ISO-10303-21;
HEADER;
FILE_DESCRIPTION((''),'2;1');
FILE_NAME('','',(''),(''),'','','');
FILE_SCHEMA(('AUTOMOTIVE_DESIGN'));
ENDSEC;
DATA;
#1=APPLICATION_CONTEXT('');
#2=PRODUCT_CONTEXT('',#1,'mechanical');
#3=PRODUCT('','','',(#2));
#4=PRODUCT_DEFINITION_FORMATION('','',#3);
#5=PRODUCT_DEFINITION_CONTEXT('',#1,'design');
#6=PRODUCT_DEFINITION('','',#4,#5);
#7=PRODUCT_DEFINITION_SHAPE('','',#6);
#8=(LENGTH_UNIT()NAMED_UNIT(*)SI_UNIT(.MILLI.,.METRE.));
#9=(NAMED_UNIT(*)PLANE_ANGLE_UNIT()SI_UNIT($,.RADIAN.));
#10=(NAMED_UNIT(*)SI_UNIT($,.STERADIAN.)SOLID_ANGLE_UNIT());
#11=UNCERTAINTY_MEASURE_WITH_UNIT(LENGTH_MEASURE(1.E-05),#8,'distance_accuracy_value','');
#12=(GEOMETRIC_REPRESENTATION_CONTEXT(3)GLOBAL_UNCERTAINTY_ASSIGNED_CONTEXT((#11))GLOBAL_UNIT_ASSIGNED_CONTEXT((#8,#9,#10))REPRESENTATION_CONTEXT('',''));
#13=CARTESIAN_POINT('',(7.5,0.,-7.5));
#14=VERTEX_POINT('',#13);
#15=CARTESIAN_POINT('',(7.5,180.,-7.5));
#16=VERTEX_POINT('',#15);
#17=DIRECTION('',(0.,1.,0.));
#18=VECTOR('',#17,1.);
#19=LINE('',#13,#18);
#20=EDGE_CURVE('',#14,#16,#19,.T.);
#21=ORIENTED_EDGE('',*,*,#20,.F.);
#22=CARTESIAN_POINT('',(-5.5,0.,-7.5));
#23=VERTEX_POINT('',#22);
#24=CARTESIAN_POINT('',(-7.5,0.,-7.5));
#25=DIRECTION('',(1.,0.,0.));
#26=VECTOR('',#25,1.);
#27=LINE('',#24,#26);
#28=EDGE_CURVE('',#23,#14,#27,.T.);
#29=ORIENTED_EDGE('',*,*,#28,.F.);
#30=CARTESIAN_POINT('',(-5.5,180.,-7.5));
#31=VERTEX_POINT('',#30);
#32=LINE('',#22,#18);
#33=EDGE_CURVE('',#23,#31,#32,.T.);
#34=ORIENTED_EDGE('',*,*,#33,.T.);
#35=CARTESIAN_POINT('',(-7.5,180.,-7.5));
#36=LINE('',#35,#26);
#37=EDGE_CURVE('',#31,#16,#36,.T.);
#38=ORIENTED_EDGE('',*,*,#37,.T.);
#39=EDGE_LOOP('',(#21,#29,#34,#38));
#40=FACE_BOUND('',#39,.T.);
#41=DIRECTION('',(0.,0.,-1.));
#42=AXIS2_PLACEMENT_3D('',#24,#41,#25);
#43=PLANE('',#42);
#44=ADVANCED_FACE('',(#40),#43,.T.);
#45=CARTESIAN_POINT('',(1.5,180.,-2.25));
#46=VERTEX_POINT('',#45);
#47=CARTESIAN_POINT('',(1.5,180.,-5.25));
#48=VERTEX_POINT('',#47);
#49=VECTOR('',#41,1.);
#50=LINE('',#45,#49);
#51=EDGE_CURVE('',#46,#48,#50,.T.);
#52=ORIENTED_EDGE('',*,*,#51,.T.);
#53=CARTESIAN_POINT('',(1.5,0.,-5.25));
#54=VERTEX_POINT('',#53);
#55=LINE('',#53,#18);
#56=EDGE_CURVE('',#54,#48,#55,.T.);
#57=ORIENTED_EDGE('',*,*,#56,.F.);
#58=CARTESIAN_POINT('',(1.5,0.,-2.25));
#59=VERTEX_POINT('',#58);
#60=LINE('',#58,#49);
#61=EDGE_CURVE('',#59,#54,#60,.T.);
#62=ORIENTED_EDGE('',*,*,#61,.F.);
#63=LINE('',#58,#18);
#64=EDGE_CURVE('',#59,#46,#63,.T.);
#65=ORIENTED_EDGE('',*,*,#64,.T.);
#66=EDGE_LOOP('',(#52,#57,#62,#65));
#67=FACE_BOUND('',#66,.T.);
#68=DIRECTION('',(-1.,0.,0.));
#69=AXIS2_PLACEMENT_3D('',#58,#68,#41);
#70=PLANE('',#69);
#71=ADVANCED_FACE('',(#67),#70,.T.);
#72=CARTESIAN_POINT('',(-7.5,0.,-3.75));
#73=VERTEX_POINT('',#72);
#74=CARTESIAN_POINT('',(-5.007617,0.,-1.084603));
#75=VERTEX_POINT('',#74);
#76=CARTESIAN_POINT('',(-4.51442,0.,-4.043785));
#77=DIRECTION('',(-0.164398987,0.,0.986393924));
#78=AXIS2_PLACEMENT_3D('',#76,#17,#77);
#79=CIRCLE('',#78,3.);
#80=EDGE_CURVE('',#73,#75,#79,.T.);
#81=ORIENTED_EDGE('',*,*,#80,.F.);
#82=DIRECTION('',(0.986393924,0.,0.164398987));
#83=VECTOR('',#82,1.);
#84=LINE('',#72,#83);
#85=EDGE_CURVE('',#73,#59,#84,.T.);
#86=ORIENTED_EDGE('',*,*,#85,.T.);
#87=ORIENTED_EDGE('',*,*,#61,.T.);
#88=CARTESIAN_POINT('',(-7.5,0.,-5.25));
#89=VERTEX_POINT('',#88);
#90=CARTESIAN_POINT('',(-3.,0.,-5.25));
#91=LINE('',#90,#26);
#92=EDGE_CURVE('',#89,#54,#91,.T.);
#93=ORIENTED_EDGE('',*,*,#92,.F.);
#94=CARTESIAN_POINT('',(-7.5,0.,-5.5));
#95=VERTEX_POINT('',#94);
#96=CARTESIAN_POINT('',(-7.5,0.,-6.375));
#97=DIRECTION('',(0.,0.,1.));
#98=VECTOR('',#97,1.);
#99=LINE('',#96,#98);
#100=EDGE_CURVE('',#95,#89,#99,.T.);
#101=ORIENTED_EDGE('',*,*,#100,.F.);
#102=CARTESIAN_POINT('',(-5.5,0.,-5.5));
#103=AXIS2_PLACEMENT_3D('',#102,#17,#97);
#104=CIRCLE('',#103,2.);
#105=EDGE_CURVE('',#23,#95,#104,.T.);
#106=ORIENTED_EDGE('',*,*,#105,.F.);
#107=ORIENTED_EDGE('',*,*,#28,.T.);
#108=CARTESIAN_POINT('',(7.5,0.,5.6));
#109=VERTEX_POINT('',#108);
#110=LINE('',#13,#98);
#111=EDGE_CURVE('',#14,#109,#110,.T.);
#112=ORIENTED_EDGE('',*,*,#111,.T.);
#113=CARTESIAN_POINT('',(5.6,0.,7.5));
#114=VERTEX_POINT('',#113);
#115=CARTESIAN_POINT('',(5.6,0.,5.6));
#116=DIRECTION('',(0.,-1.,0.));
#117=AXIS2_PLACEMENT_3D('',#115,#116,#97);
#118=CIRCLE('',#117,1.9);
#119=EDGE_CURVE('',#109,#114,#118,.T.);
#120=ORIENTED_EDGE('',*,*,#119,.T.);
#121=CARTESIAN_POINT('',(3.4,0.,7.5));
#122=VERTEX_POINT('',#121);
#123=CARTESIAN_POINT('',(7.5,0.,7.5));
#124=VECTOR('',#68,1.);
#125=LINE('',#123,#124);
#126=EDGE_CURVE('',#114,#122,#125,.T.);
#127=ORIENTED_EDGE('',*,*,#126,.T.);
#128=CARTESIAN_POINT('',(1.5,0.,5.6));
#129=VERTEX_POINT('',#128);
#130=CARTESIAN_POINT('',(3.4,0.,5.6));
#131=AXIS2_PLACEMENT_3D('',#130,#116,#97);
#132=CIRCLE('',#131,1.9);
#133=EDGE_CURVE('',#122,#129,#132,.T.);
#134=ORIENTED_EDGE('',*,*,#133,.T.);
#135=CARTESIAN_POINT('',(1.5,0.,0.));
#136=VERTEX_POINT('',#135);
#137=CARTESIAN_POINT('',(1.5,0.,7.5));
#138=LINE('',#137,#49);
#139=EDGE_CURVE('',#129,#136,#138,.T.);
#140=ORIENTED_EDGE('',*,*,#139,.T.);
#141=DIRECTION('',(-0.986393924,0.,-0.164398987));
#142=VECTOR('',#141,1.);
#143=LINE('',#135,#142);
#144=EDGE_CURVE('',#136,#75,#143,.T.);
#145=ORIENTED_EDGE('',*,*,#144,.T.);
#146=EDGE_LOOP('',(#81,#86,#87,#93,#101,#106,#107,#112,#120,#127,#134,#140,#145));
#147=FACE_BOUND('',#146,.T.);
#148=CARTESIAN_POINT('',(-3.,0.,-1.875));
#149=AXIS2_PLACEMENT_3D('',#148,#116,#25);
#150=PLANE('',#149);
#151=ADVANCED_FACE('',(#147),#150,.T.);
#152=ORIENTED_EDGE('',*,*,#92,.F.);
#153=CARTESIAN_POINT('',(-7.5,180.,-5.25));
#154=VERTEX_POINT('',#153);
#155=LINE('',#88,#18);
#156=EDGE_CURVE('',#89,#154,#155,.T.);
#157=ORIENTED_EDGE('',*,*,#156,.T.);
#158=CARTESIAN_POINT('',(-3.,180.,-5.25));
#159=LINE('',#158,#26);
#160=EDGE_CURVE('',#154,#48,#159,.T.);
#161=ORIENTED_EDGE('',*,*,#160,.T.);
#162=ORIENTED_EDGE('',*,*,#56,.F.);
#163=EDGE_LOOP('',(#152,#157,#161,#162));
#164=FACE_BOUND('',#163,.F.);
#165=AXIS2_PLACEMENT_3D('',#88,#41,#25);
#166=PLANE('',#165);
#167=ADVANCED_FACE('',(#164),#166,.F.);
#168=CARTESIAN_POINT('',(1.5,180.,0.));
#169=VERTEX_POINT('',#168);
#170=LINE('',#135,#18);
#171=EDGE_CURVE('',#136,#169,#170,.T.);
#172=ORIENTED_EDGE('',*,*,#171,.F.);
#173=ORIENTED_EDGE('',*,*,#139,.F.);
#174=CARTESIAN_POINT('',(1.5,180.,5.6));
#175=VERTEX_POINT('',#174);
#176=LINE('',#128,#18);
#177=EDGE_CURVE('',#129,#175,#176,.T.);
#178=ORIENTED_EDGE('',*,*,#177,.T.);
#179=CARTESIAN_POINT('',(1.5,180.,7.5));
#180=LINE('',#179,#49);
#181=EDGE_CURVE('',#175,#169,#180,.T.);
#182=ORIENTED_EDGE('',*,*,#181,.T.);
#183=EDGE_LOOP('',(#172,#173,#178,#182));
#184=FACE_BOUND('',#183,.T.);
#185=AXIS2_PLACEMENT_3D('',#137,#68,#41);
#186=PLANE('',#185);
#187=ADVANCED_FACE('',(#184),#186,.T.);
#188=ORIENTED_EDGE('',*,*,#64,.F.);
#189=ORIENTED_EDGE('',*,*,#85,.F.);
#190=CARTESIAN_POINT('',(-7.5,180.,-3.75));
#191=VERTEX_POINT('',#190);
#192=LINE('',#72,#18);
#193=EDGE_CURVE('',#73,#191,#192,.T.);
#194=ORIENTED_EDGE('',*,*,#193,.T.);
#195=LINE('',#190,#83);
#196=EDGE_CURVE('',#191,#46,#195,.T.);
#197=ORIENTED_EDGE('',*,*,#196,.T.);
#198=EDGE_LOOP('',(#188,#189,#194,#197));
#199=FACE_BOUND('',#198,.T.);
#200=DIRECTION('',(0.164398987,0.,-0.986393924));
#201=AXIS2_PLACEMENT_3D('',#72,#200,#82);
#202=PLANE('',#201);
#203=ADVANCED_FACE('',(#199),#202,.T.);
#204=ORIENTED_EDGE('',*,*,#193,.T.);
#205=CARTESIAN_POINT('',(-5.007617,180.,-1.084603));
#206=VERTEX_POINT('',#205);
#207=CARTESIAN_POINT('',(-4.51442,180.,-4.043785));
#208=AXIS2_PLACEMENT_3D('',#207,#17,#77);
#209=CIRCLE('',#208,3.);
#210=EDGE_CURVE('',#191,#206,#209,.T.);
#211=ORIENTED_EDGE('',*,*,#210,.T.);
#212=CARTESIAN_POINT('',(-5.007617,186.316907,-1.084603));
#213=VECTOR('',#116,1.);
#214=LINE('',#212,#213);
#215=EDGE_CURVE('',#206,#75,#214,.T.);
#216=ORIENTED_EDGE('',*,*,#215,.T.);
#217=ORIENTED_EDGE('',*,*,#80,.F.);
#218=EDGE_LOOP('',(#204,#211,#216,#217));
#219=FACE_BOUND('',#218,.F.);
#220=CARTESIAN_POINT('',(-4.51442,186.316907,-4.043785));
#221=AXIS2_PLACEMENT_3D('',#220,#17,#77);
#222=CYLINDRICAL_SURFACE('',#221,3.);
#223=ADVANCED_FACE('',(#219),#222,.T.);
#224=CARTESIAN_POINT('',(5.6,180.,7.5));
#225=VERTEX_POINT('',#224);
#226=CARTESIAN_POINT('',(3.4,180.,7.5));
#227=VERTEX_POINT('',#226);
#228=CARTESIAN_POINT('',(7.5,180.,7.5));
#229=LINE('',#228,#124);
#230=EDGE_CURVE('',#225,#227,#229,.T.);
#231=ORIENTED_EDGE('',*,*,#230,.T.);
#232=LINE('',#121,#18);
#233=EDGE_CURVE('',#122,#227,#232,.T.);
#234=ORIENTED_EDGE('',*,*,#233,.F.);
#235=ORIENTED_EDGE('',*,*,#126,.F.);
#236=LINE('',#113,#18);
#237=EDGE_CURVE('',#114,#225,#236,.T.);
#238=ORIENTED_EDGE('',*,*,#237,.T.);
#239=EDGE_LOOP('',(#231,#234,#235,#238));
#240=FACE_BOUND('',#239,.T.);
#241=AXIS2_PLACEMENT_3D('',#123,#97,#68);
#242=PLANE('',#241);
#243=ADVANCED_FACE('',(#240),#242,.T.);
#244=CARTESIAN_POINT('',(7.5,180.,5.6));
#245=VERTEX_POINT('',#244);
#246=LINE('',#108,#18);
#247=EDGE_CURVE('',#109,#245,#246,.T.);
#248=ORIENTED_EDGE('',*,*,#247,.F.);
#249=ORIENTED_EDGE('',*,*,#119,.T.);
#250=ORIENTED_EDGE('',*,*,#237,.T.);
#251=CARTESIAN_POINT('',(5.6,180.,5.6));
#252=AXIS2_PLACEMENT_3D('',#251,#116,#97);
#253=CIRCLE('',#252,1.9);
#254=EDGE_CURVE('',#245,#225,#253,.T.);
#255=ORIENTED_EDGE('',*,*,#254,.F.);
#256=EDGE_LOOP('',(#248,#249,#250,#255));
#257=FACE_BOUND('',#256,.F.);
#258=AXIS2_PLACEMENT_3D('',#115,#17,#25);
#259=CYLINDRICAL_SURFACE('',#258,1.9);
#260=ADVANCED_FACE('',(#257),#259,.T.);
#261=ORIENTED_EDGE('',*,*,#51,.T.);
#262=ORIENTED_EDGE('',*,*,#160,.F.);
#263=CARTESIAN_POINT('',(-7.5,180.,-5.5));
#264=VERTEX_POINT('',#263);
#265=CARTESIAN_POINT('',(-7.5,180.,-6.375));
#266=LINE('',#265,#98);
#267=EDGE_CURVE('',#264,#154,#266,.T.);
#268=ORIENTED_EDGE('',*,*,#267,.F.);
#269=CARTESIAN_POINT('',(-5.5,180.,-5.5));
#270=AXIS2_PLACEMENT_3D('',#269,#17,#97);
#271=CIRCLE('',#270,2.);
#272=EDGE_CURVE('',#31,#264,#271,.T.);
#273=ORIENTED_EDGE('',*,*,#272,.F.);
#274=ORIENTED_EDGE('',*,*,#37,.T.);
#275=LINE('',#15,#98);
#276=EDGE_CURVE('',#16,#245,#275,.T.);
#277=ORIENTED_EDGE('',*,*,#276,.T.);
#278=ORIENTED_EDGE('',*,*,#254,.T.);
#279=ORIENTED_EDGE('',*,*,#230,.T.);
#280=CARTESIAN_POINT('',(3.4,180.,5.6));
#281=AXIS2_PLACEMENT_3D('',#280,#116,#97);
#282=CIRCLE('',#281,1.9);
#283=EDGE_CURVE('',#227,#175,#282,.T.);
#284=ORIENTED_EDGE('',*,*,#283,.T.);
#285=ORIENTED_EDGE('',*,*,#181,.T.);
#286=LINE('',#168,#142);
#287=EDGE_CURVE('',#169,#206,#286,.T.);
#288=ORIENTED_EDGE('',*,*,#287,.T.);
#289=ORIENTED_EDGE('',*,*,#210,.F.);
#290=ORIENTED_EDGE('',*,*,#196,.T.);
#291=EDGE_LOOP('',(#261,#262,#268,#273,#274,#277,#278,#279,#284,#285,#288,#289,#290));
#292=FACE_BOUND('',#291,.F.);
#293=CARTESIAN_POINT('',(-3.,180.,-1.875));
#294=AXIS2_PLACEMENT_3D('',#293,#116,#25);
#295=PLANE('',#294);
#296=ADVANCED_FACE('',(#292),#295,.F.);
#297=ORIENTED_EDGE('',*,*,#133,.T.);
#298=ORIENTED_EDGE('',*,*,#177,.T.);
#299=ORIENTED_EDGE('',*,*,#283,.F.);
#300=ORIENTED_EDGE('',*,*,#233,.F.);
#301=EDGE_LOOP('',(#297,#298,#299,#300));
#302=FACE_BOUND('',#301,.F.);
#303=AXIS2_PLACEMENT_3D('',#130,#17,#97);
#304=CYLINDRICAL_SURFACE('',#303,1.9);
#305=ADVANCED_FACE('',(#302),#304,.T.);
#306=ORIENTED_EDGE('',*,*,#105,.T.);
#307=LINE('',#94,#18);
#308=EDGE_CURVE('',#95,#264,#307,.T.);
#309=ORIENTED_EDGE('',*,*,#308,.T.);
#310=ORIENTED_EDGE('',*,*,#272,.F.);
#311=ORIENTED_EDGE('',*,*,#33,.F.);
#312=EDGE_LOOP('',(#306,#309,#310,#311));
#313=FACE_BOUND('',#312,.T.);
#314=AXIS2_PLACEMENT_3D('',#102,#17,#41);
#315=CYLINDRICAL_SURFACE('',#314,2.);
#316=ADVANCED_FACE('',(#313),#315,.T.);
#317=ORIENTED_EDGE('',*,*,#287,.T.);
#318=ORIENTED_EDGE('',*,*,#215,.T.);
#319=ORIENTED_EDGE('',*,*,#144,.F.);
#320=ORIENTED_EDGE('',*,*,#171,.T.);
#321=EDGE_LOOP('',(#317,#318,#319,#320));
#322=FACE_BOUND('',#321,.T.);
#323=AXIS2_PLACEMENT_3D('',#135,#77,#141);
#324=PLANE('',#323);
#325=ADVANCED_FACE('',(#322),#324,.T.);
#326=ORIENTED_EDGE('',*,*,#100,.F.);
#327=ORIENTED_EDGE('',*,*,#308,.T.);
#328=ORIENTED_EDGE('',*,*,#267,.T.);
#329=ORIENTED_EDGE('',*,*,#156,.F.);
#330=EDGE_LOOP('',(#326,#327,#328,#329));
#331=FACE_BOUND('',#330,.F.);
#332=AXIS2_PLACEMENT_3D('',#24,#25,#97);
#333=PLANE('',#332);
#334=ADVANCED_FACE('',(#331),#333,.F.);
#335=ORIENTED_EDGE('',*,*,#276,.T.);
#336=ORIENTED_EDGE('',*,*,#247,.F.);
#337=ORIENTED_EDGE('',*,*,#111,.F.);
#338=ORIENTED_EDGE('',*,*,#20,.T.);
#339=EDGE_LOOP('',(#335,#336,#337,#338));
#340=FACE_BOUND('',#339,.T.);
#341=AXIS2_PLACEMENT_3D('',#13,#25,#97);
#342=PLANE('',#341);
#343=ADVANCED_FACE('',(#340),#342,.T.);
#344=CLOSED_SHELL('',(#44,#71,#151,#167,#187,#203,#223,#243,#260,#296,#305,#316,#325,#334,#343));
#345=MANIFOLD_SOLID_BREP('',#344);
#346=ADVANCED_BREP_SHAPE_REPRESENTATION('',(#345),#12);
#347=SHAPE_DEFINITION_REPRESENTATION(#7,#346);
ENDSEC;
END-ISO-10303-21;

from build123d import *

# Parameters (mm, degrees)
F0_W        = 9
F0_H        = 2.25
F1_DEPTH    = 180
F2_T1_DEPTH = 192.6338141032
F3_R        = 2
F4_R        = 1.9


# Not quite as in the source:
# - a fillet or chamfer that OpenCascade refuses, or shapes differently, is made with other operations: its cross-section is extruded or revolved along the edge and cut away or added


with BuildPart() as f1:
    # F0 (on Front) → F1 (new body)
    with BuildSketch(Plane.XZ):
        Polygon((1.5, -2.25), (1.5, 0), (-7.5, -1.5), (-7.5, -3.75), align=None)
        Polygon((7.5, -7.5), (7.5, 7.5), (1.5, 7.5), (1.5, 0), (1.5, -2.25), (1.5, -5.25), (1.5, -7.5), align=None)
        with Locations((-3, -6.375)):
            Rectangle(F0_W, F0_H)
    extrude(amount=-F1_DEPTH)

    # F2: fillet of radius 3 on 1 edges, made by hand

    # F2_s2 → F2_t1 (cut)
    with BuildSketch(Plane.XZ.offset(-186.3169070516)):
        with BuildLine():
            ThreePointArc((-5.0076165068, -1.0846027511), (-6.7056654696, -1.9947746893), (-7.5, -3.75))
            Line((-7.5, -3.75), (-7.5, -1.5))
            Line((-7.5, -1.5), (-5.0076165068, -1.0846027511))
        make_face()
    extrude(amount=F2_T1_DEPTH, mode=Mode.SUBTRACT)

    # F3
    f3_edges = [f1.edges().sort_by_distance(p)[0] for p in [
        (-7.5, 90, -7.5),
    ]]
    fillet(f3_edges, radius=F3_R)

    # F4
    f4_edges = [f1.edges().sort_by_distance(p)[0] for p in [
        (1.5, 90, 7.5),
        (7.5, 90, 7.5),
    ]]
    fillet(f4_edges, radius=F4_R)


solid = f1.part
